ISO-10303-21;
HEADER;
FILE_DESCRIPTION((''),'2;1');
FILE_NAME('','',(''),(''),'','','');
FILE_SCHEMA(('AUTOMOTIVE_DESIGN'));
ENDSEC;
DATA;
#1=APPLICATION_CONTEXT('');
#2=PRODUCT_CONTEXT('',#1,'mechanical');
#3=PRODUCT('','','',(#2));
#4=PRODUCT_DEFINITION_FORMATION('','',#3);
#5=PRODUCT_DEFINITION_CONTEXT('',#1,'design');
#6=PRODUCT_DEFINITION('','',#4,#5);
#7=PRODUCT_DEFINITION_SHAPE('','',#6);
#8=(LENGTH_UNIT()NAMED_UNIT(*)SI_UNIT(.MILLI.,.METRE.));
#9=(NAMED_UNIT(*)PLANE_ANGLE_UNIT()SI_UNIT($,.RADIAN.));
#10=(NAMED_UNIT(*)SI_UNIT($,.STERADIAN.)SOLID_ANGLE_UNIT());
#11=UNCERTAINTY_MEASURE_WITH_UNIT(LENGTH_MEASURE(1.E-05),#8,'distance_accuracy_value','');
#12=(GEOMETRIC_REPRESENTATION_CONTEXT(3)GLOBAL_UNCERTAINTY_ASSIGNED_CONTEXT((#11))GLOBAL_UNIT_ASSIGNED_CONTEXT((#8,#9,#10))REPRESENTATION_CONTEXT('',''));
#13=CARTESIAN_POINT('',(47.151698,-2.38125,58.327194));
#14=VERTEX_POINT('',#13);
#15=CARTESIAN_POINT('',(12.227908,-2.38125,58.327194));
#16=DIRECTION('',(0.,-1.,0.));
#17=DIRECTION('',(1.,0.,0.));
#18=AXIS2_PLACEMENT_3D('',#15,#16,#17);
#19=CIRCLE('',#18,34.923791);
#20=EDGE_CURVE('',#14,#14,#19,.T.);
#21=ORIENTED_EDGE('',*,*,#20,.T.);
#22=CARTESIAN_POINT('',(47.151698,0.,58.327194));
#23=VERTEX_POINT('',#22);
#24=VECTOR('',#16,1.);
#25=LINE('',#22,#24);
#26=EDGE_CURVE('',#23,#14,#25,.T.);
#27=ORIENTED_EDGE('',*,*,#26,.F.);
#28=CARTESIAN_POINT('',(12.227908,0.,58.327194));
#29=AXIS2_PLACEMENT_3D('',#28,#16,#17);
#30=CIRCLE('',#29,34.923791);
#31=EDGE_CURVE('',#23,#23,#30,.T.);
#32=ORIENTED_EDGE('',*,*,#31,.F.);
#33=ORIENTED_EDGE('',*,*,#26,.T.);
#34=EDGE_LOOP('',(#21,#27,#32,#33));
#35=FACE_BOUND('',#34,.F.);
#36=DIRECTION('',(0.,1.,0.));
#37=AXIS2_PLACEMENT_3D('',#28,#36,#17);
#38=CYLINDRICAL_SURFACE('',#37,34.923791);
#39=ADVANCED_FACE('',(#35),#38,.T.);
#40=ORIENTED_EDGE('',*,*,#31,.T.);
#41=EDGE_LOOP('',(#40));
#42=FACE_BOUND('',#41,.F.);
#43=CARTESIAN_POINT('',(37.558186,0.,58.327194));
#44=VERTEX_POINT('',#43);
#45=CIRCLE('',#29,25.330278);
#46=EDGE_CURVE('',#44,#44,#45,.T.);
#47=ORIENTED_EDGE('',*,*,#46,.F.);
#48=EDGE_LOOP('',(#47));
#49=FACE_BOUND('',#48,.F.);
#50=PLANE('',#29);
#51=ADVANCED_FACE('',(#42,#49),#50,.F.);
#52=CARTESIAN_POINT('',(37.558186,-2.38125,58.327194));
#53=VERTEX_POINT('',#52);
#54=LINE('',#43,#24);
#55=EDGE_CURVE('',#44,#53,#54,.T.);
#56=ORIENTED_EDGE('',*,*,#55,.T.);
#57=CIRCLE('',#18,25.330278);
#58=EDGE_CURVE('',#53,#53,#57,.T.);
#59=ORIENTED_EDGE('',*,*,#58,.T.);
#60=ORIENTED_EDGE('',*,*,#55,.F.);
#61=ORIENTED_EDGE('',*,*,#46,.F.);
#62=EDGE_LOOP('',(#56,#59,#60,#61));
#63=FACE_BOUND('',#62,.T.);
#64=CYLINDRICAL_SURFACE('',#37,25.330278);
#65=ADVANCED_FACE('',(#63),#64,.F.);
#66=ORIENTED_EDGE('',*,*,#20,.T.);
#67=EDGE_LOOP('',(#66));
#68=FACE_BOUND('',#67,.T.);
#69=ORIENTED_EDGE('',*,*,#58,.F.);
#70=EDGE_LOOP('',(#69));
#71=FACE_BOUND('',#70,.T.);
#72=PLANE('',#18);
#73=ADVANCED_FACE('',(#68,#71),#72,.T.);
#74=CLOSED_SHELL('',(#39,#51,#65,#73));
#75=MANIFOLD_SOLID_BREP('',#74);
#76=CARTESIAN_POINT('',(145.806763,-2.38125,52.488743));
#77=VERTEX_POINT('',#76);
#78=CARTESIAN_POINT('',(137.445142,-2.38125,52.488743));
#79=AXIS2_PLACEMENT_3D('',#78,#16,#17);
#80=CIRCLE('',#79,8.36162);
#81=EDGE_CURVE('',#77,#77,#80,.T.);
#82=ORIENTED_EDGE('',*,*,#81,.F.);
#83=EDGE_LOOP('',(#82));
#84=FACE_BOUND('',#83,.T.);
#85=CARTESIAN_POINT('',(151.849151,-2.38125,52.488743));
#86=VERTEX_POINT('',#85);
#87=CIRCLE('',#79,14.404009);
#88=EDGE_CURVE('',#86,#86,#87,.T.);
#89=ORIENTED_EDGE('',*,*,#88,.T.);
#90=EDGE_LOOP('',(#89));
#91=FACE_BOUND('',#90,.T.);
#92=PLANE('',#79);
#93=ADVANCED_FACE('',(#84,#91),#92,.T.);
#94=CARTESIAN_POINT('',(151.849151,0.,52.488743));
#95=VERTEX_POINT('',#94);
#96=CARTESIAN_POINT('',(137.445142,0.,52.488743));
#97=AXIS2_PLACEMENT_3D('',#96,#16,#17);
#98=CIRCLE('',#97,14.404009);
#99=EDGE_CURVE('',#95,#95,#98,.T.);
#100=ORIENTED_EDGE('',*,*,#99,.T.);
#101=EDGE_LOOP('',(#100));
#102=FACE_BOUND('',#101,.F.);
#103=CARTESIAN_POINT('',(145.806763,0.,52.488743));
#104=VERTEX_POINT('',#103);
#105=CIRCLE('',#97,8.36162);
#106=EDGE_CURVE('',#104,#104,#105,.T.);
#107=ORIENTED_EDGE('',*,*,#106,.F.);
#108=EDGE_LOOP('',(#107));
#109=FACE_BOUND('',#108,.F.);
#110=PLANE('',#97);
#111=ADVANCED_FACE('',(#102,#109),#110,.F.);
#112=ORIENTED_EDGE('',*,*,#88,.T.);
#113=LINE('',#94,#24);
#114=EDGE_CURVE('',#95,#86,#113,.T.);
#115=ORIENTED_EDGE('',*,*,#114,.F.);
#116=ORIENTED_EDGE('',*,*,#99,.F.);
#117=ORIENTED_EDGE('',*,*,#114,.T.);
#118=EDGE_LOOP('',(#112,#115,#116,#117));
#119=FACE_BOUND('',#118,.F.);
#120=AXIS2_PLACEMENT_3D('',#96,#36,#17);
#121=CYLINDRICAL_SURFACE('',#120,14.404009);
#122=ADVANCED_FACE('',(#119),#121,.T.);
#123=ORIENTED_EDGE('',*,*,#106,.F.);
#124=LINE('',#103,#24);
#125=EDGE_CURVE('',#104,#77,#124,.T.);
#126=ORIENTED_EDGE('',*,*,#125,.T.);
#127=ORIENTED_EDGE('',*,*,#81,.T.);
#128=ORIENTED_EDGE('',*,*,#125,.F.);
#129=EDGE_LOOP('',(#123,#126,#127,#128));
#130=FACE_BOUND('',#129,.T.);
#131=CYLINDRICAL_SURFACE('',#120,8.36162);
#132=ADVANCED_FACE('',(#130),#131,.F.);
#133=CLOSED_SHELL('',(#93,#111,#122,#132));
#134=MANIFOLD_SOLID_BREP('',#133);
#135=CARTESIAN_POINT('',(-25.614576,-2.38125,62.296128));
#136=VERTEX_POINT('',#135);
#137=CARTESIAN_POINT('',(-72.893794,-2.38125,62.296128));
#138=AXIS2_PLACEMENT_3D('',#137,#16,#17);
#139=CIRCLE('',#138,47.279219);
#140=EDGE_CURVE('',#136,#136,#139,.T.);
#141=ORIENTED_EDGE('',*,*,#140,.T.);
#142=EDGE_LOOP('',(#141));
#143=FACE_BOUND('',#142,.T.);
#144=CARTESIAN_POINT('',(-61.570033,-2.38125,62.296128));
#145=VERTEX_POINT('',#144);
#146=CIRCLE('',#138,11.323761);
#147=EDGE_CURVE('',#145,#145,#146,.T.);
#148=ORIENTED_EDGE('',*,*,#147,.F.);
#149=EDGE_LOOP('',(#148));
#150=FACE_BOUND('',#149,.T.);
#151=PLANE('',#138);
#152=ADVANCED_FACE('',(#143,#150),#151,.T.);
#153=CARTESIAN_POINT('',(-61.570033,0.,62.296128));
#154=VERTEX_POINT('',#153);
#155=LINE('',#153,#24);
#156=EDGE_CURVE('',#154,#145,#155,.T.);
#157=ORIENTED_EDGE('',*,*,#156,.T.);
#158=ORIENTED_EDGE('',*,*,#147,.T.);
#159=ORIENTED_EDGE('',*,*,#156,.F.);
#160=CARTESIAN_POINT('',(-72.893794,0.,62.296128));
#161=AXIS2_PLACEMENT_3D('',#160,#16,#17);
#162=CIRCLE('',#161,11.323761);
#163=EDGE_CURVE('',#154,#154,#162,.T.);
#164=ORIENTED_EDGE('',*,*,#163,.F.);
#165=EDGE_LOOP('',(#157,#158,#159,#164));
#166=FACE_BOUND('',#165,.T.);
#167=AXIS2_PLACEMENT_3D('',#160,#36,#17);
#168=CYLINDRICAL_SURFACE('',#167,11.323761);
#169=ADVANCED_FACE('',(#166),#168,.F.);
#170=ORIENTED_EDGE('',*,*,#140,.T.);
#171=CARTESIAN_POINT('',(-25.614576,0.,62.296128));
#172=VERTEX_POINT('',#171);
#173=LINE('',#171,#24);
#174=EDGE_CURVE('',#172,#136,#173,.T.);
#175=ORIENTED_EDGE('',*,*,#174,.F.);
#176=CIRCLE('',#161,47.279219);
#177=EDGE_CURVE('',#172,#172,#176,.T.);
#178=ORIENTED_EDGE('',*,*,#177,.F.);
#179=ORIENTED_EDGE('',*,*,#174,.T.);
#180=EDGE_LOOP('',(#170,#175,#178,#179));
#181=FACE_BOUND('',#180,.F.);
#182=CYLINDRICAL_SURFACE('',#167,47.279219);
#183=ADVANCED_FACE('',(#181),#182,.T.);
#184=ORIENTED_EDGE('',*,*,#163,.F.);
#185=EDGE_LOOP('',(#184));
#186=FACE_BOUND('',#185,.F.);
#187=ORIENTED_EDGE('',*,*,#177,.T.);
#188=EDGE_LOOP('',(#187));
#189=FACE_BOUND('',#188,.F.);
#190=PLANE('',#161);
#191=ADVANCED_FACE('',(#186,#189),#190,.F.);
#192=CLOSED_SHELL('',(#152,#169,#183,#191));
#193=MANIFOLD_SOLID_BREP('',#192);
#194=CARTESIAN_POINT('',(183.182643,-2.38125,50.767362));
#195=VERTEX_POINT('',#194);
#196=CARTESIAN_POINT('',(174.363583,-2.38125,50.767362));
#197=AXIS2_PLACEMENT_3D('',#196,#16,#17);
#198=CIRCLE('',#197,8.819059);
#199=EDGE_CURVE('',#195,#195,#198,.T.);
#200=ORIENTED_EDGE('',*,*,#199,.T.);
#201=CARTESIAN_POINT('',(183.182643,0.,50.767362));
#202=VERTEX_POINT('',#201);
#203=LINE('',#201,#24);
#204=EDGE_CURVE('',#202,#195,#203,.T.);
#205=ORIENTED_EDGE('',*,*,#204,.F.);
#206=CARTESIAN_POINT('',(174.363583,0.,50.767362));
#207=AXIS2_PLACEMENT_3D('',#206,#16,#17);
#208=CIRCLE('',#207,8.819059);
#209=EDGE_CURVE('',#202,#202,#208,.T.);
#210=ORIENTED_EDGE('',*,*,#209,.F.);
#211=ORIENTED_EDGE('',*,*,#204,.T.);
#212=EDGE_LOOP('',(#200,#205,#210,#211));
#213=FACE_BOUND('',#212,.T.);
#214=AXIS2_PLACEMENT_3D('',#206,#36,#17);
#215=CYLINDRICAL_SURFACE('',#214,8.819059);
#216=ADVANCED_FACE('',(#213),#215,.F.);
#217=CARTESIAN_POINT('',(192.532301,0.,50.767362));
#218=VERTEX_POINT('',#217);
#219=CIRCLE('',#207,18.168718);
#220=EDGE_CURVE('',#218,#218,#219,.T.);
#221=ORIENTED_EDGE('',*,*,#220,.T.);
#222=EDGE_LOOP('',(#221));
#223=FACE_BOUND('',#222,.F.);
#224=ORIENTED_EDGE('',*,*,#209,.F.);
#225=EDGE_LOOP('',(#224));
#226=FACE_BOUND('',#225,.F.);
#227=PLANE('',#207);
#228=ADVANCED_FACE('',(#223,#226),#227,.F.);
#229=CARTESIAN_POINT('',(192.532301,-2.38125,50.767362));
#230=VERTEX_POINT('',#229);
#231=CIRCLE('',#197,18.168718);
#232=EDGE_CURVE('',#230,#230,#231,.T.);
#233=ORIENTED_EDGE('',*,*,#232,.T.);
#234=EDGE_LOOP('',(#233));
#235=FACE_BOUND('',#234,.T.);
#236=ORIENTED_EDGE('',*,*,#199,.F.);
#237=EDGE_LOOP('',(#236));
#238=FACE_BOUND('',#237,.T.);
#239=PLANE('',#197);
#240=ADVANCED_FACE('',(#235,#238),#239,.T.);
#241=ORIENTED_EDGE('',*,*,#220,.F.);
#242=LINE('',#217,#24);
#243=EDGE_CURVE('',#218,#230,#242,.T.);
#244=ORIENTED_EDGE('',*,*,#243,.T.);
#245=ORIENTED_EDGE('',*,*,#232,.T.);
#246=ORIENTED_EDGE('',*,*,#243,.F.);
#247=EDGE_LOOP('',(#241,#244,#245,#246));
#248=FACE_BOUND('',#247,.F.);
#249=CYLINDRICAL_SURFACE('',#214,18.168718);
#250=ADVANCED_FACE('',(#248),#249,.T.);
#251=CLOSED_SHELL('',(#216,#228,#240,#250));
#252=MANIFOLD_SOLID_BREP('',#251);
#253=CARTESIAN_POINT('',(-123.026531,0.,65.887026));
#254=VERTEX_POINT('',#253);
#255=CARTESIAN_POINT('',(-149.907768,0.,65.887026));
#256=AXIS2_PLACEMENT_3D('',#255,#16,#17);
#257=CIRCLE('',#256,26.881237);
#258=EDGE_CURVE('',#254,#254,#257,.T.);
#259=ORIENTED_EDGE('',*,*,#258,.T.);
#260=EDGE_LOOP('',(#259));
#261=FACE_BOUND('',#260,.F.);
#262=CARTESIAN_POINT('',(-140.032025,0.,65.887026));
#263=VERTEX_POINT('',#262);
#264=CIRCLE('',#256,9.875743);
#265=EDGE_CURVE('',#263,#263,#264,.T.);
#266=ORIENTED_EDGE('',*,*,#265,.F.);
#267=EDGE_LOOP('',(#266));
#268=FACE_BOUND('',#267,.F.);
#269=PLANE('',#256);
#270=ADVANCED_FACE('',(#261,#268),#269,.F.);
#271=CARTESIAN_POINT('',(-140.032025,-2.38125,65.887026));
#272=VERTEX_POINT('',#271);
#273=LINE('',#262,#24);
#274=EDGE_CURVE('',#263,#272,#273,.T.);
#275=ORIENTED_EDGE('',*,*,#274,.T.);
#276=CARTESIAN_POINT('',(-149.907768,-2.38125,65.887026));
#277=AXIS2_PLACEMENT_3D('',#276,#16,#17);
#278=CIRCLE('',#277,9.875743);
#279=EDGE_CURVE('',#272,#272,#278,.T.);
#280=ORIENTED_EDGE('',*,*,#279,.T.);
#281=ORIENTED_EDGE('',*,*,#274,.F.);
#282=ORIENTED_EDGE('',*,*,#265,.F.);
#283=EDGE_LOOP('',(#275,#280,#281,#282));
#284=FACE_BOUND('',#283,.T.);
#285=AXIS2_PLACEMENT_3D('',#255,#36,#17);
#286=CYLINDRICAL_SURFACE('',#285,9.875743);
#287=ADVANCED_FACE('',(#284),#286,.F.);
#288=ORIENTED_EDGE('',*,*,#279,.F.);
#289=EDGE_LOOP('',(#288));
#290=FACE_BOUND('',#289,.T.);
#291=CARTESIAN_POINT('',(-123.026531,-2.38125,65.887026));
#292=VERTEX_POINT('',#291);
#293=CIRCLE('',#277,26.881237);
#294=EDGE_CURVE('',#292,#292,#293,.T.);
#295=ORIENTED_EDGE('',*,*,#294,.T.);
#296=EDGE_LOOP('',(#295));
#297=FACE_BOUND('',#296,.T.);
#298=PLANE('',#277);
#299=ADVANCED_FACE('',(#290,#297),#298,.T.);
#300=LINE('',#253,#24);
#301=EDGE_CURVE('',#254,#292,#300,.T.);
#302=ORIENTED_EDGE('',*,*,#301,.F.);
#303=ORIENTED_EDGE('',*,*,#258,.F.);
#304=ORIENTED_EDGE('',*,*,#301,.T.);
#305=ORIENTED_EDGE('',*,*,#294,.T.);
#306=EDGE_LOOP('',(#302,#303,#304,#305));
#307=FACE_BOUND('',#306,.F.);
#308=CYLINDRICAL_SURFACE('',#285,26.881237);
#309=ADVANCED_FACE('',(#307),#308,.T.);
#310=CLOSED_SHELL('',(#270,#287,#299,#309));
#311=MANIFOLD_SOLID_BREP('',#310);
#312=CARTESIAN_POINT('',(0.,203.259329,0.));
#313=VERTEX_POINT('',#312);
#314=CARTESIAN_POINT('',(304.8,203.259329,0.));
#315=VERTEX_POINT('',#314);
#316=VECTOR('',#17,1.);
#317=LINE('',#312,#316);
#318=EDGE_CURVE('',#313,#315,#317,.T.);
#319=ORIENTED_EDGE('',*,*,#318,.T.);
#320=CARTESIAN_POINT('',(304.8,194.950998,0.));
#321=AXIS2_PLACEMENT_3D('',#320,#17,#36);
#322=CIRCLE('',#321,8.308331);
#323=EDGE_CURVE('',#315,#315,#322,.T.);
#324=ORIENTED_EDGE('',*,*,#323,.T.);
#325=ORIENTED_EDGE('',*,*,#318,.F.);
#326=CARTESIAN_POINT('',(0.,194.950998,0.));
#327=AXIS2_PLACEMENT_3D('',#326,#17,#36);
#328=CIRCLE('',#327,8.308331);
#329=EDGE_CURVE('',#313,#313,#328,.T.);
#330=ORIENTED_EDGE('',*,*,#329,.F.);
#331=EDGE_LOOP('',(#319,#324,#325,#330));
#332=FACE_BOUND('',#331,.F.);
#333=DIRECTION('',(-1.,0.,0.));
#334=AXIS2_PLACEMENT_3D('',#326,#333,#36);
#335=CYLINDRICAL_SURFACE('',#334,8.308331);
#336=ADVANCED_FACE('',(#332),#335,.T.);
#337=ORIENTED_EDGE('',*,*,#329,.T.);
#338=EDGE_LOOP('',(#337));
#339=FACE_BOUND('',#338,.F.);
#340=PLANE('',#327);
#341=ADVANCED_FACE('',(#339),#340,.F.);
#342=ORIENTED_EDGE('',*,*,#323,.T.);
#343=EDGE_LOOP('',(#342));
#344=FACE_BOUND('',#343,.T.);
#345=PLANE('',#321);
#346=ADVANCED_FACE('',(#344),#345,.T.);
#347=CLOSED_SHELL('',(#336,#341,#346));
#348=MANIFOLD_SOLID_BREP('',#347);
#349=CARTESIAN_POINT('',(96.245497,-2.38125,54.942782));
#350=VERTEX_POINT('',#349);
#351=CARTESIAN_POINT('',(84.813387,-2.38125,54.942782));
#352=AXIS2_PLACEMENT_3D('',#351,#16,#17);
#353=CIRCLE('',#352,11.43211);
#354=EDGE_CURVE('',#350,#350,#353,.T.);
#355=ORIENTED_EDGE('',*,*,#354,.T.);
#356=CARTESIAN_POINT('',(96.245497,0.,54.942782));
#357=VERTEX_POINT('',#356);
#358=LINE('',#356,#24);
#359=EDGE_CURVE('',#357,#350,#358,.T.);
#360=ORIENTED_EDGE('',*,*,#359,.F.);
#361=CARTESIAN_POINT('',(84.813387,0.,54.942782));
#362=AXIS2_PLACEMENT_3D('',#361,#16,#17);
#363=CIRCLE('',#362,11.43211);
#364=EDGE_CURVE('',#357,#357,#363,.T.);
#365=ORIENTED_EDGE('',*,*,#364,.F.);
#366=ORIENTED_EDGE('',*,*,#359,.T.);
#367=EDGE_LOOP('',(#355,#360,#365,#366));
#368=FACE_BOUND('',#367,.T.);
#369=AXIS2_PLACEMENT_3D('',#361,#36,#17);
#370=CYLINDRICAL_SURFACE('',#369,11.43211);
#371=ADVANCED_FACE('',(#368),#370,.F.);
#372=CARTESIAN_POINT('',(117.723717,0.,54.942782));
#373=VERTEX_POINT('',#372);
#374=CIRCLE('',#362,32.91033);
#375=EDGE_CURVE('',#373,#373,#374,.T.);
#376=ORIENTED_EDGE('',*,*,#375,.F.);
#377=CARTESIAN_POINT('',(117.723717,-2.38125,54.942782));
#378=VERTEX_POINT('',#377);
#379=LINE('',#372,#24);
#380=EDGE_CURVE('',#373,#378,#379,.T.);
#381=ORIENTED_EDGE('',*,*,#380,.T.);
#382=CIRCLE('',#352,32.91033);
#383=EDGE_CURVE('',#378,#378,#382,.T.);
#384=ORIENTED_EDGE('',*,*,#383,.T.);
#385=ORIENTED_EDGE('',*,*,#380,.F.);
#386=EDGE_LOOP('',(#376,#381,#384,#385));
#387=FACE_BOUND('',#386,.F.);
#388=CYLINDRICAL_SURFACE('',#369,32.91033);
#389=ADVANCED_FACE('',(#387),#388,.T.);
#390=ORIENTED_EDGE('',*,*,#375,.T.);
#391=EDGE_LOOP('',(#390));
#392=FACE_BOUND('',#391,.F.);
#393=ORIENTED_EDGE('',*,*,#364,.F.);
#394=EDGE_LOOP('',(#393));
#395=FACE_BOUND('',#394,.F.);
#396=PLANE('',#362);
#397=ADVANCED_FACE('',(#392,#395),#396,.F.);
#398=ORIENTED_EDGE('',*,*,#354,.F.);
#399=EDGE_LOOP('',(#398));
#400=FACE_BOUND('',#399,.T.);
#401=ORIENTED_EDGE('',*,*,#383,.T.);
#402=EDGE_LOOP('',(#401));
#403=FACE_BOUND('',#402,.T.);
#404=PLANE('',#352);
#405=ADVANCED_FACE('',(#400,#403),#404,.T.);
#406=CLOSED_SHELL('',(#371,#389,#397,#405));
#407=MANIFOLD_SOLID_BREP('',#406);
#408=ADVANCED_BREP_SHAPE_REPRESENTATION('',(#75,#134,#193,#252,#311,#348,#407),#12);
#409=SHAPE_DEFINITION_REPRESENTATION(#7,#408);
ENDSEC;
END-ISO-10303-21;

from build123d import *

# Parameters (mm, degrees)
F0_R     = 18.1687180168
F0_R_2   = 8.8190592327
F1_DEPTH = 2.38125
F0_R_3   = 14.4040085197
F0_R_4   = 8.3616203188
F0_R_5   = 32.910330078
F0_R_6   = 11.4321100003
F0_R_7   = 34.9237905831
F0_R_8   = 25.330278317
F0_R_9   = 47.2792187039
F0_R_10  = 11.3237611098
F0_R_11  = 26.8812365552
F0_R_12  = 9.8757429668
F2_R     = 8.3083314945
F3_DEPTH = 304.8


# Not quite as in the source:
# - a length typed as a fraction of an inch, garbled in the dataset ("3 / 203.2 mm" for 3/8 in), is restored


with BuildPart() as f1:
    # F0 (on Front) → F1 (new body)
    with BuildSketch(Plane.XZ):
        with Locations((174.3635833263, 50.7673621178)):
            Circle(F0_R)
        with Locations((174.3635833263, 50.7673621178)):
            Circle(F0_R_2, mode=Mode.SUBTRACT)
    extrude(amount=F1_DEPTH)


with BuildPart() as f1b:
    # F0 (on Front) → F1, piece 2 (new body)
    with BuildSketch(Plane.XZ):
        with Locations((137.4451422389, 52.4887427962)):
            Circle(F0_R_3)
        with Locations((137.4451422389, 52.4887427962)):
            Circle(F0_R_4, mode=Mode.SUBTRACT)
    extrude(amount=F1_DEPTH)


with BuildPart() as f1c:
    # F0 (on Front) → F1, piece 3 (new body)
    with BuildSketch(Plane.XZ):
        with Locations((84.8133870552, 54.9427815848)):
            Circle(F0_R_5)
        with Locations((84.8133870552, 54.9427815848)):
            Circle(F0_R_6, mode=Mode.SUBTRACT)
    extrude(amount=F1_DEPTH)


with BuildPart() as f1d:
    # F0 (on Front) → F1, piece 4 (new body)
    with BuildSketch(Plane.XZ):
        with Locations((12.2279077768, 58.3271943033)):
            Circle(F0_R_7)
        with Locations((12.2279077768, 58.3271943033)):
            Circle(F0_R_8, mode=Mode.SUBTRACT)
    extrude(amount=F1_DEPTH)


with BuildPart() as f1e:
    # F0 (on Front) → F1, piece 5 (new body)
    with BuildSketch(Plane.XZ):
        with Locations((-72.893794205, 62.2961282233)):
            Circle(F0_R_9)
        with Locations((-72.893794205, 62.2961282233)):
            Circle(F0_R_10, mode=Mode.SUBTRACT)
    extrude(amount=F1_DEPTH)


with BuildPart() as f1f:
    # F0 (on Front) → F1, piece 6 (new body)
    with BuildSketch(Plane.XZ):
        with Locations((-149.9077677727, 65.8870264888)):
            Circle(F0_R_11)
        with Locations((-149.9077677727, 65.8870264888)):
            Circle(F0_R_12, mode=Mode.SUBTRACT)
    extrude(amount=F1_DEPTH)


with BuildPart() as f3:
    # F2 (on Right) → F3 (new body)
    with BuildSketch(Plane.YZ):
        with Locations((194.9509978294, 0)):
            Circle(F2_R)
    extrude(amount=F3_DEPTH)


solid = Compound([f1.part, f1b.part, f1c.part, f1d.part, f1e.part, f1f.part, f3.part])
